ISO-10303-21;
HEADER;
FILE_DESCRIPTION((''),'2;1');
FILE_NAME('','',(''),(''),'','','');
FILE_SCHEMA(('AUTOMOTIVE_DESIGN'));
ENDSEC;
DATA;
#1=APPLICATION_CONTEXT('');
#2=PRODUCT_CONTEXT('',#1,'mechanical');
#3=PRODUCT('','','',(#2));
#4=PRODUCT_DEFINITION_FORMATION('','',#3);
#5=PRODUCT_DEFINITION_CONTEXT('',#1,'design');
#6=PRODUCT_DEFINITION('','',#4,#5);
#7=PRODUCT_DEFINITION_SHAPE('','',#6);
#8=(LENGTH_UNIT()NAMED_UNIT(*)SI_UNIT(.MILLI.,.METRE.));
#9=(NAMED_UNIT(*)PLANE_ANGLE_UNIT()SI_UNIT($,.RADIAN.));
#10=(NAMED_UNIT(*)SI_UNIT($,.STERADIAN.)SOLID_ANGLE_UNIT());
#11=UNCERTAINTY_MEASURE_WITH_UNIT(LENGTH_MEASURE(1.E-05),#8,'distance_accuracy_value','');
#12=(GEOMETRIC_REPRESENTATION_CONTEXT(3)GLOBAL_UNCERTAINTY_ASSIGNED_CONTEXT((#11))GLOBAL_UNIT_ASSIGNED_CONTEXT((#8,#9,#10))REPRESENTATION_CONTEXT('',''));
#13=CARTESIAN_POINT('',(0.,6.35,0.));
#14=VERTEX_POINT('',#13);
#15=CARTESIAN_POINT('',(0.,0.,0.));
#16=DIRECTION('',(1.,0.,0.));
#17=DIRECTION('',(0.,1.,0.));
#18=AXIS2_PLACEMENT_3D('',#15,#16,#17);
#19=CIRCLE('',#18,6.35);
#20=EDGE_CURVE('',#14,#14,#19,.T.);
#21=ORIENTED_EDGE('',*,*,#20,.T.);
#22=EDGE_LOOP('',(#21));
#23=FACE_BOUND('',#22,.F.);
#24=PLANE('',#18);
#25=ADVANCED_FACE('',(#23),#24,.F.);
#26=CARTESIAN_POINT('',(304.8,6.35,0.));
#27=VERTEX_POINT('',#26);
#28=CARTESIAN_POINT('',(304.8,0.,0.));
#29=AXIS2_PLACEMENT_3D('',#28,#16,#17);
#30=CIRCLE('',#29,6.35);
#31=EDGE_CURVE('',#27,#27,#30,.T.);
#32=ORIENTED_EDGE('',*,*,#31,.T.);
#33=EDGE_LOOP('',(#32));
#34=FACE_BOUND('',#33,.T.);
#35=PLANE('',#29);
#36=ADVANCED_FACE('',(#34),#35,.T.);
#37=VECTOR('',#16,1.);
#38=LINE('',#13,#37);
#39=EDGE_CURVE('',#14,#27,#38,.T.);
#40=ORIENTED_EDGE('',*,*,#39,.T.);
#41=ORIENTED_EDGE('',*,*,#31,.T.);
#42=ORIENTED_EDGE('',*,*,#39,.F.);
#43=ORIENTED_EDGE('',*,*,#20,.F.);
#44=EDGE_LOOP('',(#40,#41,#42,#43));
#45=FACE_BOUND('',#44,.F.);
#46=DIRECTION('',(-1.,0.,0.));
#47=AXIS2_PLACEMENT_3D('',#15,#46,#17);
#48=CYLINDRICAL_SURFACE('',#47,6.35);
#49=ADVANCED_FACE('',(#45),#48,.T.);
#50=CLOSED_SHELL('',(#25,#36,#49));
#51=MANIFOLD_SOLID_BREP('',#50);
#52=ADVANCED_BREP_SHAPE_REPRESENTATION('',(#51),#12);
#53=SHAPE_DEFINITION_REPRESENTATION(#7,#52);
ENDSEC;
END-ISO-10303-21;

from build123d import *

# Parameters (mm, degrees)
F1_R     = 6.35
F2_DEPTH = 304.8


# Not quite as in the source:
# - a variable given as a bare number and used for a length is read in inches; the dataset says mm whatever the document's units were


with BuildPart() as f2:
    # F1 (on Right) → F2 (new body)
    with BuildSketch(Plane.YZ):
        Circle(F1_R)
    extrude(amount=F2_DEPTH)


solid = f2.part
